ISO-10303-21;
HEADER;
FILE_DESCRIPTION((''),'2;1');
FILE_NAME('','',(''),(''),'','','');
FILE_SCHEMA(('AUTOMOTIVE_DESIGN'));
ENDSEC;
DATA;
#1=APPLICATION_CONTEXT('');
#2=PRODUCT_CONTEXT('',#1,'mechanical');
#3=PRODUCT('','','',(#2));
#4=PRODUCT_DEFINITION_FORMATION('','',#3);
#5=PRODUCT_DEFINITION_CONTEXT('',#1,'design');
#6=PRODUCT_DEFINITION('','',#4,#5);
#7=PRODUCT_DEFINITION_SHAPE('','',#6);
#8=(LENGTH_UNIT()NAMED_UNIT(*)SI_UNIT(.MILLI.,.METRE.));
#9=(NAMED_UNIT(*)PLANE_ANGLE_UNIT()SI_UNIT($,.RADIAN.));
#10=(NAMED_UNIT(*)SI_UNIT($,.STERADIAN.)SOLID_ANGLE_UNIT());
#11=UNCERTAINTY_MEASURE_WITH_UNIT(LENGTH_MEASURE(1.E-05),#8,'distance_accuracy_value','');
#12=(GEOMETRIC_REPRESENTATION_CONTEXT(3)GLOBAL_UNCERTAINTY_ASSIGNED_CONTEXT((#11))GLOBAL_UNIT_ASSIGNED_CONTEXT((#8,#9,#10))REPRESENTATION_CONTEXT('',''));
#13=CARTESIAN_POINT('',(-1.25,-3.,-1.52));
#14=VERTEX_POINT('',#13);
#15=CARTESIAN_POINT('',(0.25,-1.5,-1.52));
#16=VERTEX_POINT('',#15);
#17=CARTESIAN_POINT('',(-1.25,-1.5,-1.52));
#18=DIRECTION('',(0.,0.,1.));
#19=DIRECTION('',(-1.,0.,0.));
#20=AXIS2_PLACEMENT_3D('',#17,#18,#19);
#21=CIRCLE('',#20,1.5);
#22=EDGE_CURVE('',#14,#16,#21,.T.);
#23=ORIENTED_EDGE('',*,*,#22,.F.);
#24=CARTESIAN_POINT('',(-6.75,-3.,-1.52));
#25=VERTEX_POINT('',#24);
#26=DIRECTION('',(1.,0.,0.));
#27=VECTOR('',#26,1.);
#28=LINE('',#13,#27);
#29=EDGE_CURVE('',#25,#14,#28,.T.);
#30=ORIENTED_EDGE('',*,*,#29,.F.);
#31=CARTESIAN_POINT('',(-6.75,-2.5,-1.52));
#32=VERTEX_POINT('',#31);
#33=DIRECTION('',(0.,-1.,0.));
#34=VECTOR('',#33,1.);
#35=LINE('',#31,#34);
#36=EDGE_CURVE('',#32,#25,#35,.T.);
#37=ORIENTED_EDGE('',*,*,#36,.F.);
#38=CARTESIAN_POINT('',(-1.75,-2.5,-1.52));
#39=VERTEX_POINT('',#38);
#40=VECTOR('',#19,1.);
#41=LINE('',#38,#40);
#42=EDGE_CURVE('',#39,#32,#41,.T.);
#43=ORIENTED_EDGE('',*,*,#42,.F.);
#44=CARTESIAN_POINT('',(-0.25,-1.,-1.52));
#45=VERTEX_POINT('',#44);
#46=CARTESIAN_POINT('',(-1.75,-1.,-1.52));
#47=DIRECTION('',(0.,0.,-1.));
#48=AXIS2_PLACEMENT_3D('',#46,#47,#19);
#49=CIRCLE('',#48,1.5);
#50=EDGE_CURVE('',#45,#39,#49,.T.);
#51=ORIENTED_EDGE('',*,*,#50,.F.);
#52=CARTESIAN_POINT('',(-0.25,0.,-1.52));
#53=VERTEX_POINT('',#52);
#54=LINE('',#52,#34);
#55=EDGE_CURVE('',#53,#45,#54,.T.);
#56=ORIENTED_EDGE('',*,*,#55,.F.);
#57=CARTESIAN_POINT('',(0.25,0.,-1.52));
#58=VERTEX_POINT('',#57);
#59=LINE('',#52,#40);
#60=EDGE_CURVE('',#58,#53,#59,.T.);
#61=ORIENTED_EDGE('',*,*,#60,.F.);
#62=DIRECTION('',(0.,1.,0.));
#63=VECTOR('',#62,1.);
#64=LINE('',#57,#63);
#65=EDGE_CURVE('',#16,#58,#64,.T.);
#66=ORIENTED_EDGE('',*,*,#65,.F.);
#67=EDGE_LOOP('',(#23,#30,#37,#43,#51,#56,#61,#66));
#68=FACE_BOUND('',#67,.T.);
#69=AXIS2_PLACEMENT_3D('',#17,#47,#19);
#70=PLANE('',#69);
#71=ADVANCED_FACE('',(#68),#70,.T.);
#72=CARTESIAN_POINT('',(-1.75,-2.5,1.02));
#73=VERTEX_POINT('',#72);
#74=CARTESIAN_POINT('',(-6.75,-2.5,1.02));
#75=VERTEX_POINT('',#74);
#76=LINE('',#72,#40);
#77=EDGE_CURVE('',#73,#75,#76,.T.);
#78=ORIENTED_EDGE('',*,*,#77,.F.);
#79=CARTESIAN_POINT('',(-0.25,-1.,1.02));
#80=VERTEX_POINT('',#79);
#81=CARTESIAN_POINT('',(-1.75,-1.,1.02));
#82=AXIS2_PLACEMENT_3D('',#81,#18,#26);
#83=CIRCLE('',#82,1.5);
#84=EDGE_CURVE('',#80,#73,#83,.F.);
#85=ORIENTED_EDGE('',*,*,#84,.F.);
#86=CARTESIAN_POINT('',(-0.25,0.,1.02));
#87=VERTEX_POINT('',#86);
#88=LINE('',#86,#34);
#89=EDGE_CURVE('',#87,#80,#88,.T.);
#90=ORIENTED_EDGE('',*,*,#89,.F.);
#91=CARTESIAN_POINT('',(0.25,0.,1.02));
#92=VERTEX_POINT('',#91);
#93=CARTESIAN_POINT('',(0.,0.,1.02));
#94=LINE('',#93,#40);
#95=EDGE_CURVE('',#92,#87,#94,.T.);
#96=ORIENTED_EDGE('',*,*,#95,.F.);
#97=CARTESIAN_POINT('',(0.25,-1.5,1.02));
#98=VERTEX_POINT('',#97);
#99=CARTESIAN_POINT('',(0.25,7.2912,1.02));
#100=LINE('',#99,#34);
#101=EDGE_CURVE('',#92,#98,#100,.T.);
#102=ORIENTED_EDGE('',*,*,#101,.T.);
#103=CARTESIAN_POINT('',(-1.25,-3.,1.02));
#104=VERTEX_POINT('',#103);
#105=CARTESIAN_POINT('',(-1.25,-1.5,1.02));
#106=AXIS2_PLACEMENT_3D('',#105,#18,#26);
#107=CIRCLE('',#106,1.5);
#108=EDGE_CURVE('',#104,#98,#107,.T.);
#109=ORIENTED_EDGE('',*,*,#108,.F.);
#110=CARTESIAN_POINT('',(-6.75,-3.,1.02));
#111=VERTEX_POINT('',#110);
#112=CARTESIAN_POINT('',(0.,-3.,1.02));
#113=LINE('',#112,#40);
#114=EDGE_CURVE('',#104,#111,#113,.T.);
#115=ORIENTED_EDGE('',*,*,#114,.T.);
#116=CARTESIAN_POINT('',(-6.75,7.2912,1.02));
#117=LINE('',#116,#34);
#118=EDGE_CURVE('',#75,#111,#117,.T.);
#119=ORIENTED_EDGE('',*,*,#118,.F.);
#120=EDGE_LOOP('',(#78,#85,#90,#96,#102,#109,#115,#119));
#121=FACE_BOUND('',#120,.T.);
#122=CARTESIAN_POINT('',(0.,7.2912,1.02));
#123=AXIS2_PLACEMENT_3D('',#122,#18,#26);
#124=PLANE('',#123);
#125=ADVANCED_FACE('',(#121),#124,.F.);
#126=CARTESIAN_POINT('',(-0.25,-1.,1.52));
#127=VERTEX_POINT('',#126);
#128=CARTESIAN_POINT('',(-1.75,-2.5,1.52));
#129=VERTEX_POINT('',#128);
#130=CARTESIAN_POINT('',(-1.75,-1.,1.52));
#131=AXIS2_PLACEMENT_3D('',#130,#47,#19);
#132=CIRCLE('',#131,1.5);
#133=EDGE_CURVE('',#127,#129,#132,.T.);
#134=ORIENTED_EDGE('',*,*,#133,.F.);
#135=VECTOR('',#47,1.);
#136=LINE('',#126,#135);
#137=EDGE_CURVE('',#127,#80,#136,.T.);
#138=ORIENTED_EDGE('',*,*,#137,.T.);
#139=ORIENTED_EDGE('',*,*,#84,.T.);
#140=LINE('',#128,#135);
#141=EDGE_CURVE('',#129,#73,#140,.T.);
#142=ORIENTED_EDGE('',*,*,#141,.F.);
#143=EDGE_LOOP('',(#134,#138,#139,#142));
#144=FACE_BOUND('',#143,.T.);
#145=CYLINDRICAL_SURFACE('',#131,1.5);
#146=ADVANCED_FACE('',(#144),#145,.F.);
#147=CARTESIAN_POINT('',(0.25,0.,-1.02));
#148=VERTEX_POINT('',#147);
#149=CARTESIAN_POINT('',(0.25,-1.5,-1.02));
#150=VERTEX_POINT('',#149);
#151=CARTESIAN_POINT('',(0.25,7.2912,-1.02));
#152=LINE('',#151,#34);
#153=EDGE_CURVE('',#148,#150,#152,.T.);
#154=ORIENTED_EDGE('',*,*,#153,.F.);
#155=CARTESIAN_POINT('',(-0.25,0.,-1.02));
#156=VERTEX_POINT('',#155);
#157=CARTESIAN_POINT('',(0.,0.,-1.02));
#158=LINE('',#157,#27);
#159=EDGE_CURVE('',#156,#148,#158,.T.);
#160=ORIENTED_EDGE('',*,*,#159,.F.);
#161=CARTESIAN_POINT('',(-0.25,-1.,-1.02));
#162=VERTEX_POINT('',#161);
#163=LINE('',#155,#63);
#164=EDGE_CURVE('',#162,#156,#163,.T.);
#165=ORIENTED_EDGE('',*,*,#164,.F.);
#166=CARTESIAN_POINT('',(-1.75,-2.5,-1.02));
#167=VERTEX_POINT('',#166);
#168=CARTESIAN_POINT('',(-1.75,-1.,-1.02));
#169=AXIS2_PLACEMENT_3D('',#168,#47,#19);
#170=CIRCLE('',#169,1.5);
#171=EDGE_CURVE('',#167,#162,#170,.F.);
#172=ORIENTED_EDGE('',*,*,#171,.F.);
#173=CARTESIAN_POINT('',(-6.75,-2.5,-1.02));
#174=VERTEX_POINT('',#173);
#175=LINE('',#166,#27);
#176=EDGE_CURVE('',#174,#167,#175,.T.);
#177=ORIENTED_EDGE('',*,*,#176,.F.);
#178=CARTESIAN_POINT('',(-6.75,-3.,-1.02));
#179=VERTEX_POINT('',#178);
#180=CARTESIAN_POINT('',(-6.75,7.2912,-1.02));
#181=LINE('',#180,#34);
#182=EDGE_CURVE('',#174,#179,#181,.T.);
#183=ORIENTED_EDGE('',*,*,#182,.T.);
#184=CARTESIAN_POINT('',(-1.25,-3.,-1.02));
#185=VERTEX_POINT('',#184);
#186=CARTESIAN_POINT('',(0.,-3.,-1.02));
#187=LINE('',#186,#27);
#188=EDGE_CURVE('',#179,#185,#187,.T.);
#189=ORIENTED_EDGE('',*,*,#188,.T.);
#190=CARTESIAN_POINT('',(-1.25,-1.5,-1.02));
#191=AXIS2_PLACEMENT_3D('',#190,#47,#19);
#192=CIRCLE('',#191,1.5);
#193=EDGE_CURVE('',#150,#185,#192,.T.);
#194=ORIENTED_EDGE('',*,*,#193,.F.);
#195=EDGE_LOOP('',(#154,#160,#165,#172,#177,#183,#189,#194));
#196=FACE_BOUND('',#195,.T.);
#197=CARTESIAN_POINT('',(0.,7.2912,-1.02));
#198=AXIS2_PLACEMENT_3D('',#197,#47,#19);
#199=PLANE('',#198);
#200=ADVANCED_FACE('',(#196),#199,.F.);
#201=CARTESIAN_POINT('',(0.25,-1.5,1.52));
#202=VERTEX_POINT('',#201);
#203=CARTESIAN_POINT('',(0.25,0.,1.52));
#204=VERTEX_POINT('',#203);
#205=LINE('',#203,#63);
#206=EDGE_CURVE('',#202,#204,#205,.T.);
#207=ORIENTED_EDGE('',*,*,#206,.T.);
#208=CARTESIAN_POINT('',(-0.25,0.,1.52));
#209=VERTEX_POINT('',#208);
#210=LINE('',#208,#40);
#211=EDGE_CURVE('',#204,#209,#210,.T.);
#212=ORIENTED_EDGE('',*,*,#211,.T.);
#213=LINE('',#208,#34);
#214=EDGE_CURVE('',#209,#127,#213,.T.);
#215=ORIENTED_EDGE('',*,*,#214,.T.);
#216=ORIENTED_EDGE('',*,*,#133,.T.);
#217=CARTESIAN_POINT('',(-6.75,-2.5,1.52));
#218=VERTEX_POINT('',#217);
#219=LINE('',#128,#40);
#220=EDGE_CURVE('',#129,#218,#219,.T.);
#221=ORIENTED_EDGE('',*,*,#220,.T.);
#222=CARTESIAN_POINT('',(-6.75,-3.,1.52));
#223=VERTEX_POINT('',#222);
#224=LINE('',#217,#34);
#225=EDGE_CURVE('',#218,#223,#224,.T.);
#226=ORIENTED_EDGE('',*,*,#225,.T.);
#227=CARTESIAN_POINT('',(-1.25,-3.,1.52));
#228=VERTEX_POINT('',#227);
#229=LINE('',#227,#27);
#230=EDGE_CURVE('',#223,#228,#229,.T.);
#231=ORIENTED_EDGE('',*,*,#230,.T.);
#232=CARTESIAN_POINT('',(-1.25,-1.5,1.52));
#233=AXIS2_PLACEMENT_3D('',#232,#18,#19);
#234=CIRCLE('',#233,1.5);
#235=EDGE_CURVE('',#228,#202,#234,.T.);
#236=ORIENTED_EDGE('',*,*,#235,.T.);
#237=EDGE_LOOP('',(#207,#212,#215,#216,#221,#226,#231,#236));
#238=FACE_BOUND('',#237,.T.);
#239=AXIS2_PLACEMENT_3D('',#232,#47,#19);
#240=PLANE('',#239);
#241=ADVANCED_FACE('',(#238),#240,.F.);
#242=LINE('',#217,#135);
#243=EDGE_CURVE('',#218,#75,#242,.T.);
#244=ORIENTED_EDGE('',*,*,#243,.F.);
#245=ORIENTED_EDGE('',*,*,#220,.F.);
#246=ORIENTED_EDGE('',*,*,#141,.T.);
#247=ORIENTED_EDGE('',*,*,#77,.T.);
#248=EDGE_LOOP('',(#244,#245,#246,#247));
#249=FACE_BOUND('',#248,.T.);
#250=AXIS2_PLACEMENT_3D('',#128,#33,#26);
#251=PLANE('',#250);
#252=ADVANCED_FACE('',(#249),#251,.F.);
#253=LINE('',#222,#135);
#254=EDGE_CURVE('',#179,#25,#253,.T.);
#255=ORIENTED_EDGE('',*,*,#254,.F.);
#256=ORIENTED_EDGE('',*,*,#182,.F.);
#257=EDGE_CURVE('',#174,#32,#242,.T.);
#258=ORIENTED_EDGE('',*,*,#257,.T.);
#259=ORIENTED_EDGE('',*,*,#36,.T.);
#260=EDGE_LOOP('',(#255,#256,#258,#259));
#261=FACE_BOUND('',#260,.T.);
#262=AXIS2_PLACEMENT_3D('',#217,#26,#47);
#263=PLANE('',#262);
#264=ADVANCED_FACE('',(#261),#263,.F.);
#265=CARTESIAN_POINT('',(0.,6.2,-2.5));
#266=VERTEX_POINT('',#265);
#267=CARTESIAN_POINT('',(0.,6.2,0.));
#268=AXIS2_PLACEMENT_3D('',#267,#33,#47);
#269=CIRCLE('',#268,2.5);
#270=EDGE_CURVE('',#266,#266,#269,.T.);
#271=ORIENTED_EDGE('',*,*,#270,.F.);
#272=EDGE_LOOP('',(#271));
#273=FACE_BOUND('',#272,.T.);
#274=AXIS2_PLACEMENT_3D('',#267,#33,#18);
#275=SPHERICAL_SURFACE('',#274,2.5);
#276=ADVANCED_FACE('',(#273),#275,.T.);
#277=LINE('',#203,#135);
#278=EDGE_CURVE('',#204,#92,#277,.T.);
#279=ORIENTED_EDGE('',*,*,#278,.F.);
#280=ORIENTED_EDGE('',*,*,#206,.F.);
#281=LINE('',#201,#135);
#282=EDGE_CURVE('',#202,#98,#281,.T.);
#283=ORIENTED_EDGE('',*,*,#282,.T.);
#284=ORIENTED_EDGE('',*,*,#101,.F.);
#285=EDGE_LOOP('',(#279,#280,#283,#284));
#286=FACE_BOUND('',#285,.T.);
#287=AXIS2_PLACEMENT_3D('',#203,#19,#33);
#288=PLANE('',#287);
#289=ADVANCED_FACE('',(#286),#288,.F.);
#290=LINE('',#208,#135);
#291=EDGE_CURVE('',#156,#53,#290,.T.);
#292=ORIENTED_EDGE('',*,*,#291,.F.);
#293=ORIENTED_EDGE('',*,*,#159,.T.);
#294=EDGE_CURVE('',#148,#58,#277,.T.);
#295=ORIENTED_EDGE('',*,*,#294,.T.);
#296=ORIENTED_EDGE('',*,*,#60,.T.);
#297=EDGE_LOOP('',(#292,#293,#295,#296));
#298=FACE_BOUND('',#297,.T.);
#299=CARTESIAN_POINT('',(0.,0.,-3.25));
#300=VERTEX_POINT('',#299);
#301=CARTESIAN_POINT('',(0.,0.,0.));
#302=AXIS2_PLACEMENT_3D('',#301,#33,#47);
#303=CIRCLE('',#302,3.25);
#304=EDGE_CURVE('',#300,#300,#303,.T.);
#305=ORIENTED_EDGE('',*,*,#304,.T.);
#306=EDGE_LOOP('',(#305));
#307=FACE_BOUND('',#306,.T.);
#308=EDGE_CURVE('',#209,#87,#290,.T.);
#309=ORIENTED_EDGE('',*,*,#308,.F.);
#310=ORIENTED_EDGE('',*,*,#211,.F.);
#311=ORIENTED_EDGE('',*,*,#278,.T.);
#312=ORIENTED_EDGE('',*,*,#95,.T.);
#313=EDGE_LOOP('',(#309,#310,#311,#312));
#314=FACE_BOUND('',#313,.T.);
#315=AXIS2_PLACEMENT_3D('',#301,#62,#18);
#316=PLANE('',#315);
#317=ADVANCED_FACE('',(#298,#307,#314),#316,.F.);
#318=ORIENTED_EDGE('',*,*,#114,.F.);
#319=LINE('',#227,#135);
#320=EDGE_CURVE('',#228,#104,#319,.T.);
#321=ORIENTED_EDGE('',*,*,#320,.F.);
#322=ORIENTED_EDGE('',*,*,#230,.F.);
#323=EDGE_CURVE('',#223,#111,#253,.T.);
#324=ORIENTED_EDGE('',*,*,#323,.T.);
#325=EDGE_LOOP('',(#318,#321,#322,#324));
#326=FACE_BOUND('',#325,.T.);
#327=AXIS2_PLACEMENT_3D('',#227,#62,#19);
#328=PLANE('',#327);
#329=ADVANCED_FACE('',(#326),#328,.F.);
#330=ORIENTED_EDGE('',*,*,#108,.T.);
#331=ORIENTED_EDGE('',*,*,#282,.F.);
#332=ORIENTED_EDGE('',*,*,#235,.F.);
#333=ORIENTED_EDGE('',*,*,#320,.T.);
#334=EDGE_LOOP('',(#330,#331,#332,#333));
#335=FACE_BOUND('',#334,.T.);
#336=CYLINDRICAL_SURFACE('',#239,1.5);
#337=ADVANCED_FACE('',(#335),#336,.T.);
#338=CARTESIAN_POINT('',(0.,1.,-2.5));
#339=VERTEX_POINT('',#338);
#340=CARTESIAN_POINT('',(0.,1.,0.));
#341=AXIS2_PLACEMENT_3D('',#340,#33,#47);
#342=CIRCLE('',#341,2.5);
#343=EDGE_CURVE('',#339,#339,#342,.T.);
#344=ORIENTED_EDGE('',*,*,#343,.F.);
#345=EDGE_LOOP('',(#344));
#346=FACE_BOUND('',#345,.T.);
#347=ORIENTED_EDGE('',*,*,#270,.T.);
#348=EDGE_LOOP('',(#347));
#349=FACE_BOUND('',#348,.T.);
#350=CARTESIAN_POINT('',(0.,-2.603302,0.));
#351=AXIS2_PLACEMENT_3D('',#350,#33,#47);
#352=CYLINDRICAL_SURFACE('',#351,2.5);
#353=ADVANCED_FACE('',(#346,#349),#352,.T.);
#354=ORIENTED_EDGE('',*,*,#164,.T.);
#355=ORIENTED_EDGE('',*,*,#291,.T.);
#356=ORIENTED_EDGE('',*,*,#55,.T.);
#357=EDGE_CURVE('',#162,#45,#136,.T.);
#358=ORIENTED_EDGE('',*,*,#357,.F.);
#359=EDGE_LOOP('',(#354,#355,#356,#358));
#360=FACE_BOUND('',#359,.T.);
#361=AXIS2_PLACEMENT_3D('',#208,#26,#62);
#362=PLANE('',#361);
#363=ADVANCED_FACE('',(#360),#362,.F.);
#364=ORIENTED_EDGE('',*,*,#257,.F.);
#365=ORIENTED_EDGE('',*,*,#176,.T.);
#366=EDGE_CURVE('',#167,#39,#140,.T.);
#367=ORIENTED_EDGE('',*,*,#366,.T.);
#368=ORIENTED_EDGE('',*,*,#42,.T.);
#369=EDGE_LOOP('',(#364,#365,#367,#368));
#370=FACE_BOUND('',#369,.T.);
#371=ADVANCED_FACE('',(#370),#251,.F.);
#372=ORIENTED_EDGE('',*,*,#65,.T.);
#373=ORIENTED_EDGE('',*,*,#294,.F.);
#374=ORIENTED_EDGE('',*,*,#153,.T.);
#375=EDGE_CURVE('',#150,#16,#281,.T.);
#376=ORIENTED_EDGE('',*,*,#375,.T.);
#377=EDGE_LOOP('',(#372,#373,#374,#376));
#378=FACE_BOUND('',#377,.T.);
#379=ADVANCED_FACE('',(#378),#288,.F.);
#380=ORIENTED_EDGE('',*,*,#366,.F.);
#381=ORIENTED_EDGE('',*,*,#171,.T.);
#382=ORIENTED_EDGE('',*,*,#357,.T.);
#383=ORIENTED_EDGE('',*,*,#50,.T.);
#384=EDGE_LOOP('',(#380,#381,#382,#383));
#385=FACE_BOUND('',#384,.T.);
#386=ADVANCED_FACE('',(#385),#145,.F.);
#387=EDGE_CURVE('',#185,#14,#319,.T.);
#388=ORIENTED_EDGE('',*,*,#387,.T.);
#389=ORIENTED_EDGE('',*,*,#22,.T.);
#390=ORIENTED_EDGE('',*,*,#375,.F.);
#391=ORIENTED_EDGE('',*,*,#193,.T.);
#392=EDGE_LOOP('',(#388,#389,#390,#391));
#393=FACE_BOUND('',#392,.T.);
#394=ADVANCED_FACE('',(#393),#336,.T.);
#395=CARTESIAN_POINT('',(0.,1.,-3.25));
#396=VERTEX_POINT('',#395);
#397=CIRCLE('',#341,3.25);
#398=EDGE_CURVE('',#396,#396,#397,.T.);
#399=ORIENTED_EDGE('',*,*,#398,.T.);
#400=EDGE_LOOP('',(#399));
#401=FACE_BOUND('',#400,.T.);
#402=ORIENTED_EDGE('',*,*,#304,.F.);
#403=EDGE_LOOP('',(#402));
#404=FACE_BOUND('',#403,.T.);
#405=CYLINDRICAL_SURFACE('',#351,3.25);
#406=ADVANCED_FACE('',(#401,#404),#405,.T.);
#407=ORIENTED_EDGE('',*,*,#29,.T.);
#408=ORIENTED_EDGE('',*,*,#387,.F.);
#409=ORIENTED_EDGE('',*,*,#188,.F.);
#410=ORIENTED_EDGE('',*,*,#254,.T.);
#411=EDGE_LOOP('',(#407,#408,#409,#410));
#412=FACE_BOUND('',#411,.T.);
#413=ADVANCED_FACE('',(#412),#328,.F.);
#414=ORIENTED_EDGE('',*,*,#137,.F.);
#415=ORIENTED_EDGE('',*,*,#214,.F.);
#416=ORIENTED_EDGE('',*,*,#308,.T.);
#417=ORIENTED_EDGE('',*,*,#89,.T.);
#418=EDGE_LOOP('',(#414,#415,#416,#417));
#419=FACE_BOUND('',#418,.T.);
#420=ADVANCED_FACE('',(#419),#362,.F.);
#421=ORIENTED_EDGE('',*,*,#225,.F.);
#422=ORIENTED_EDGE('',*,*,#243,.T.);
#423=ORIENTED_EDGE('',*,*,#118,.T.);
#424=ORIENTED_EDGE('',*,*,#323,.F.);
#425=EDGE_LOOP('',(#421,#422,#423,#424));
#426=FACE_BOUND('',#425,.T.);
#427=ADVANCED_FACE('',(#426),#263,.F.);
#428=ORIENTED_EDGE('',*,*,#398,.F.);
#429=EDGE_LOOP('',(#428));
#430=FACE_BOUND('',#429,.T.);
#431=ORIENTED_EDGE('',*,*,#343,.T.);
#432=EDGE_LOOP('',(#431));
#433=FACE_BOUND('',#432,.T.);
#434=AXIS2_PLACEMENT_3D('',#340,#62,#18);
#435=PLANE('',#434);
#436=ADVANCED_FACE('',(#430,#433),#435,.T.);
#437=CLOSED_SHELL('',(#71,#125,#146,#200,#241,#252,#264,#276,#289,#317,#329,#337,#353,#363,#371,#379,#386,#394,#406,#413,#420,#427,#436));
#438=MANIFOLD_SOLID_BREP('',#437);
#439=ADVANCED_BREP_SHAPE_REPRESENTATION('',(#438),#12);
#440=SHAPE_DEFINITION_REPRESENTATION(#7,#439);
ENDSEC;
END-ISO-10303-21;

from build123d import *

# Parameters (mm, degrees)
EXTRUDE_1_DEPTH         = 1.52
CUT_EXTRUDE_START       = -3
CUT_EXTRUDE_1_OUTLINE_W = 7
CUT_EXTRUDE_1_OUTLINE_H = 2.04
CUT_EXTRUDE_1_DEPTH     = 3


# Read off the part's stored shape, not the designer's step: Вырез-Вытянуть1
with BuildPart() as part:
    # Эскиз1 → Повернуть1 (revolve)
    with BuildSketch(Plane(origin=(0, 0, 0), x_dir=(0, 0, -1), z_dir=(1, 0, 0)), mode=Mode.PRIVATE) as revolve_1_sk:
        with BuildLine():
            Line((-2.5, 1), (0, 1))
            Line((0, 1), (0, 8.7))
            ThreePointArc((0, 8.7), (-1.767766953, 7.967766953), (-2.5, 6.2))
            Line((-2.5, 6.2), (-2.5, 1))
        make_face()
        Polygon((-3.25, 1), (-3.25, 0), (0, 0), (0, 1), (-2.5, 1), align=None)
    revolve(revolve_1_sk.sketch.rotate(Axis((0, -2.603301624, 0), (0, 1, 0)), 180), axis=Axis((0, -2.603301624, 0), (0, 1, 0)))

    # Эскиз2 → Бобышка-Вытянуть1 (add, symmetric)
    with BuildSketch(Plane.XY):
        with BuildLine():
            Line((0.25, 0), (0.25, -1.5))
            ThreePointArc((0.25, -1.5), (-0.189339828, -2.560660172), (-1.25, -3))
            Line((-1.25, -3), (-6.75, -3))
            Line((-6.75, -3), (-6.75, -2.5))
            Line((-6.75, -2.5), (-1.75, -2.5))
            ThreePointArc((-1.75, -2.5), (-0.689339828, -2.060660172), (-0.25, -1))
            Line((-0.25, -1), (-0.25, 0))
            Line((-0.25, 0), (0.25, 0))
        make_face()
    extrude(amount=EXTRUDE_1_DEPTH, both=True)

    # Вырез-Вытянуть1 outline → Вырез-Вытянуть1 (cut)
    with BuildSketch(Plane.XZ.offset(3).offset(CUT_EXTRUDE_START)):
        with Locations((-3.25, 0)):
            Rectangle(CUT_EXTRUDE_1_OUTLINE_W, CUT_EXTRUDE_1_OUTLINE_H)
    extrude(amount=CUT_EXTRUDE_1_DEPTH, mode=Mode.SUBTRACT)


solid = part.part
